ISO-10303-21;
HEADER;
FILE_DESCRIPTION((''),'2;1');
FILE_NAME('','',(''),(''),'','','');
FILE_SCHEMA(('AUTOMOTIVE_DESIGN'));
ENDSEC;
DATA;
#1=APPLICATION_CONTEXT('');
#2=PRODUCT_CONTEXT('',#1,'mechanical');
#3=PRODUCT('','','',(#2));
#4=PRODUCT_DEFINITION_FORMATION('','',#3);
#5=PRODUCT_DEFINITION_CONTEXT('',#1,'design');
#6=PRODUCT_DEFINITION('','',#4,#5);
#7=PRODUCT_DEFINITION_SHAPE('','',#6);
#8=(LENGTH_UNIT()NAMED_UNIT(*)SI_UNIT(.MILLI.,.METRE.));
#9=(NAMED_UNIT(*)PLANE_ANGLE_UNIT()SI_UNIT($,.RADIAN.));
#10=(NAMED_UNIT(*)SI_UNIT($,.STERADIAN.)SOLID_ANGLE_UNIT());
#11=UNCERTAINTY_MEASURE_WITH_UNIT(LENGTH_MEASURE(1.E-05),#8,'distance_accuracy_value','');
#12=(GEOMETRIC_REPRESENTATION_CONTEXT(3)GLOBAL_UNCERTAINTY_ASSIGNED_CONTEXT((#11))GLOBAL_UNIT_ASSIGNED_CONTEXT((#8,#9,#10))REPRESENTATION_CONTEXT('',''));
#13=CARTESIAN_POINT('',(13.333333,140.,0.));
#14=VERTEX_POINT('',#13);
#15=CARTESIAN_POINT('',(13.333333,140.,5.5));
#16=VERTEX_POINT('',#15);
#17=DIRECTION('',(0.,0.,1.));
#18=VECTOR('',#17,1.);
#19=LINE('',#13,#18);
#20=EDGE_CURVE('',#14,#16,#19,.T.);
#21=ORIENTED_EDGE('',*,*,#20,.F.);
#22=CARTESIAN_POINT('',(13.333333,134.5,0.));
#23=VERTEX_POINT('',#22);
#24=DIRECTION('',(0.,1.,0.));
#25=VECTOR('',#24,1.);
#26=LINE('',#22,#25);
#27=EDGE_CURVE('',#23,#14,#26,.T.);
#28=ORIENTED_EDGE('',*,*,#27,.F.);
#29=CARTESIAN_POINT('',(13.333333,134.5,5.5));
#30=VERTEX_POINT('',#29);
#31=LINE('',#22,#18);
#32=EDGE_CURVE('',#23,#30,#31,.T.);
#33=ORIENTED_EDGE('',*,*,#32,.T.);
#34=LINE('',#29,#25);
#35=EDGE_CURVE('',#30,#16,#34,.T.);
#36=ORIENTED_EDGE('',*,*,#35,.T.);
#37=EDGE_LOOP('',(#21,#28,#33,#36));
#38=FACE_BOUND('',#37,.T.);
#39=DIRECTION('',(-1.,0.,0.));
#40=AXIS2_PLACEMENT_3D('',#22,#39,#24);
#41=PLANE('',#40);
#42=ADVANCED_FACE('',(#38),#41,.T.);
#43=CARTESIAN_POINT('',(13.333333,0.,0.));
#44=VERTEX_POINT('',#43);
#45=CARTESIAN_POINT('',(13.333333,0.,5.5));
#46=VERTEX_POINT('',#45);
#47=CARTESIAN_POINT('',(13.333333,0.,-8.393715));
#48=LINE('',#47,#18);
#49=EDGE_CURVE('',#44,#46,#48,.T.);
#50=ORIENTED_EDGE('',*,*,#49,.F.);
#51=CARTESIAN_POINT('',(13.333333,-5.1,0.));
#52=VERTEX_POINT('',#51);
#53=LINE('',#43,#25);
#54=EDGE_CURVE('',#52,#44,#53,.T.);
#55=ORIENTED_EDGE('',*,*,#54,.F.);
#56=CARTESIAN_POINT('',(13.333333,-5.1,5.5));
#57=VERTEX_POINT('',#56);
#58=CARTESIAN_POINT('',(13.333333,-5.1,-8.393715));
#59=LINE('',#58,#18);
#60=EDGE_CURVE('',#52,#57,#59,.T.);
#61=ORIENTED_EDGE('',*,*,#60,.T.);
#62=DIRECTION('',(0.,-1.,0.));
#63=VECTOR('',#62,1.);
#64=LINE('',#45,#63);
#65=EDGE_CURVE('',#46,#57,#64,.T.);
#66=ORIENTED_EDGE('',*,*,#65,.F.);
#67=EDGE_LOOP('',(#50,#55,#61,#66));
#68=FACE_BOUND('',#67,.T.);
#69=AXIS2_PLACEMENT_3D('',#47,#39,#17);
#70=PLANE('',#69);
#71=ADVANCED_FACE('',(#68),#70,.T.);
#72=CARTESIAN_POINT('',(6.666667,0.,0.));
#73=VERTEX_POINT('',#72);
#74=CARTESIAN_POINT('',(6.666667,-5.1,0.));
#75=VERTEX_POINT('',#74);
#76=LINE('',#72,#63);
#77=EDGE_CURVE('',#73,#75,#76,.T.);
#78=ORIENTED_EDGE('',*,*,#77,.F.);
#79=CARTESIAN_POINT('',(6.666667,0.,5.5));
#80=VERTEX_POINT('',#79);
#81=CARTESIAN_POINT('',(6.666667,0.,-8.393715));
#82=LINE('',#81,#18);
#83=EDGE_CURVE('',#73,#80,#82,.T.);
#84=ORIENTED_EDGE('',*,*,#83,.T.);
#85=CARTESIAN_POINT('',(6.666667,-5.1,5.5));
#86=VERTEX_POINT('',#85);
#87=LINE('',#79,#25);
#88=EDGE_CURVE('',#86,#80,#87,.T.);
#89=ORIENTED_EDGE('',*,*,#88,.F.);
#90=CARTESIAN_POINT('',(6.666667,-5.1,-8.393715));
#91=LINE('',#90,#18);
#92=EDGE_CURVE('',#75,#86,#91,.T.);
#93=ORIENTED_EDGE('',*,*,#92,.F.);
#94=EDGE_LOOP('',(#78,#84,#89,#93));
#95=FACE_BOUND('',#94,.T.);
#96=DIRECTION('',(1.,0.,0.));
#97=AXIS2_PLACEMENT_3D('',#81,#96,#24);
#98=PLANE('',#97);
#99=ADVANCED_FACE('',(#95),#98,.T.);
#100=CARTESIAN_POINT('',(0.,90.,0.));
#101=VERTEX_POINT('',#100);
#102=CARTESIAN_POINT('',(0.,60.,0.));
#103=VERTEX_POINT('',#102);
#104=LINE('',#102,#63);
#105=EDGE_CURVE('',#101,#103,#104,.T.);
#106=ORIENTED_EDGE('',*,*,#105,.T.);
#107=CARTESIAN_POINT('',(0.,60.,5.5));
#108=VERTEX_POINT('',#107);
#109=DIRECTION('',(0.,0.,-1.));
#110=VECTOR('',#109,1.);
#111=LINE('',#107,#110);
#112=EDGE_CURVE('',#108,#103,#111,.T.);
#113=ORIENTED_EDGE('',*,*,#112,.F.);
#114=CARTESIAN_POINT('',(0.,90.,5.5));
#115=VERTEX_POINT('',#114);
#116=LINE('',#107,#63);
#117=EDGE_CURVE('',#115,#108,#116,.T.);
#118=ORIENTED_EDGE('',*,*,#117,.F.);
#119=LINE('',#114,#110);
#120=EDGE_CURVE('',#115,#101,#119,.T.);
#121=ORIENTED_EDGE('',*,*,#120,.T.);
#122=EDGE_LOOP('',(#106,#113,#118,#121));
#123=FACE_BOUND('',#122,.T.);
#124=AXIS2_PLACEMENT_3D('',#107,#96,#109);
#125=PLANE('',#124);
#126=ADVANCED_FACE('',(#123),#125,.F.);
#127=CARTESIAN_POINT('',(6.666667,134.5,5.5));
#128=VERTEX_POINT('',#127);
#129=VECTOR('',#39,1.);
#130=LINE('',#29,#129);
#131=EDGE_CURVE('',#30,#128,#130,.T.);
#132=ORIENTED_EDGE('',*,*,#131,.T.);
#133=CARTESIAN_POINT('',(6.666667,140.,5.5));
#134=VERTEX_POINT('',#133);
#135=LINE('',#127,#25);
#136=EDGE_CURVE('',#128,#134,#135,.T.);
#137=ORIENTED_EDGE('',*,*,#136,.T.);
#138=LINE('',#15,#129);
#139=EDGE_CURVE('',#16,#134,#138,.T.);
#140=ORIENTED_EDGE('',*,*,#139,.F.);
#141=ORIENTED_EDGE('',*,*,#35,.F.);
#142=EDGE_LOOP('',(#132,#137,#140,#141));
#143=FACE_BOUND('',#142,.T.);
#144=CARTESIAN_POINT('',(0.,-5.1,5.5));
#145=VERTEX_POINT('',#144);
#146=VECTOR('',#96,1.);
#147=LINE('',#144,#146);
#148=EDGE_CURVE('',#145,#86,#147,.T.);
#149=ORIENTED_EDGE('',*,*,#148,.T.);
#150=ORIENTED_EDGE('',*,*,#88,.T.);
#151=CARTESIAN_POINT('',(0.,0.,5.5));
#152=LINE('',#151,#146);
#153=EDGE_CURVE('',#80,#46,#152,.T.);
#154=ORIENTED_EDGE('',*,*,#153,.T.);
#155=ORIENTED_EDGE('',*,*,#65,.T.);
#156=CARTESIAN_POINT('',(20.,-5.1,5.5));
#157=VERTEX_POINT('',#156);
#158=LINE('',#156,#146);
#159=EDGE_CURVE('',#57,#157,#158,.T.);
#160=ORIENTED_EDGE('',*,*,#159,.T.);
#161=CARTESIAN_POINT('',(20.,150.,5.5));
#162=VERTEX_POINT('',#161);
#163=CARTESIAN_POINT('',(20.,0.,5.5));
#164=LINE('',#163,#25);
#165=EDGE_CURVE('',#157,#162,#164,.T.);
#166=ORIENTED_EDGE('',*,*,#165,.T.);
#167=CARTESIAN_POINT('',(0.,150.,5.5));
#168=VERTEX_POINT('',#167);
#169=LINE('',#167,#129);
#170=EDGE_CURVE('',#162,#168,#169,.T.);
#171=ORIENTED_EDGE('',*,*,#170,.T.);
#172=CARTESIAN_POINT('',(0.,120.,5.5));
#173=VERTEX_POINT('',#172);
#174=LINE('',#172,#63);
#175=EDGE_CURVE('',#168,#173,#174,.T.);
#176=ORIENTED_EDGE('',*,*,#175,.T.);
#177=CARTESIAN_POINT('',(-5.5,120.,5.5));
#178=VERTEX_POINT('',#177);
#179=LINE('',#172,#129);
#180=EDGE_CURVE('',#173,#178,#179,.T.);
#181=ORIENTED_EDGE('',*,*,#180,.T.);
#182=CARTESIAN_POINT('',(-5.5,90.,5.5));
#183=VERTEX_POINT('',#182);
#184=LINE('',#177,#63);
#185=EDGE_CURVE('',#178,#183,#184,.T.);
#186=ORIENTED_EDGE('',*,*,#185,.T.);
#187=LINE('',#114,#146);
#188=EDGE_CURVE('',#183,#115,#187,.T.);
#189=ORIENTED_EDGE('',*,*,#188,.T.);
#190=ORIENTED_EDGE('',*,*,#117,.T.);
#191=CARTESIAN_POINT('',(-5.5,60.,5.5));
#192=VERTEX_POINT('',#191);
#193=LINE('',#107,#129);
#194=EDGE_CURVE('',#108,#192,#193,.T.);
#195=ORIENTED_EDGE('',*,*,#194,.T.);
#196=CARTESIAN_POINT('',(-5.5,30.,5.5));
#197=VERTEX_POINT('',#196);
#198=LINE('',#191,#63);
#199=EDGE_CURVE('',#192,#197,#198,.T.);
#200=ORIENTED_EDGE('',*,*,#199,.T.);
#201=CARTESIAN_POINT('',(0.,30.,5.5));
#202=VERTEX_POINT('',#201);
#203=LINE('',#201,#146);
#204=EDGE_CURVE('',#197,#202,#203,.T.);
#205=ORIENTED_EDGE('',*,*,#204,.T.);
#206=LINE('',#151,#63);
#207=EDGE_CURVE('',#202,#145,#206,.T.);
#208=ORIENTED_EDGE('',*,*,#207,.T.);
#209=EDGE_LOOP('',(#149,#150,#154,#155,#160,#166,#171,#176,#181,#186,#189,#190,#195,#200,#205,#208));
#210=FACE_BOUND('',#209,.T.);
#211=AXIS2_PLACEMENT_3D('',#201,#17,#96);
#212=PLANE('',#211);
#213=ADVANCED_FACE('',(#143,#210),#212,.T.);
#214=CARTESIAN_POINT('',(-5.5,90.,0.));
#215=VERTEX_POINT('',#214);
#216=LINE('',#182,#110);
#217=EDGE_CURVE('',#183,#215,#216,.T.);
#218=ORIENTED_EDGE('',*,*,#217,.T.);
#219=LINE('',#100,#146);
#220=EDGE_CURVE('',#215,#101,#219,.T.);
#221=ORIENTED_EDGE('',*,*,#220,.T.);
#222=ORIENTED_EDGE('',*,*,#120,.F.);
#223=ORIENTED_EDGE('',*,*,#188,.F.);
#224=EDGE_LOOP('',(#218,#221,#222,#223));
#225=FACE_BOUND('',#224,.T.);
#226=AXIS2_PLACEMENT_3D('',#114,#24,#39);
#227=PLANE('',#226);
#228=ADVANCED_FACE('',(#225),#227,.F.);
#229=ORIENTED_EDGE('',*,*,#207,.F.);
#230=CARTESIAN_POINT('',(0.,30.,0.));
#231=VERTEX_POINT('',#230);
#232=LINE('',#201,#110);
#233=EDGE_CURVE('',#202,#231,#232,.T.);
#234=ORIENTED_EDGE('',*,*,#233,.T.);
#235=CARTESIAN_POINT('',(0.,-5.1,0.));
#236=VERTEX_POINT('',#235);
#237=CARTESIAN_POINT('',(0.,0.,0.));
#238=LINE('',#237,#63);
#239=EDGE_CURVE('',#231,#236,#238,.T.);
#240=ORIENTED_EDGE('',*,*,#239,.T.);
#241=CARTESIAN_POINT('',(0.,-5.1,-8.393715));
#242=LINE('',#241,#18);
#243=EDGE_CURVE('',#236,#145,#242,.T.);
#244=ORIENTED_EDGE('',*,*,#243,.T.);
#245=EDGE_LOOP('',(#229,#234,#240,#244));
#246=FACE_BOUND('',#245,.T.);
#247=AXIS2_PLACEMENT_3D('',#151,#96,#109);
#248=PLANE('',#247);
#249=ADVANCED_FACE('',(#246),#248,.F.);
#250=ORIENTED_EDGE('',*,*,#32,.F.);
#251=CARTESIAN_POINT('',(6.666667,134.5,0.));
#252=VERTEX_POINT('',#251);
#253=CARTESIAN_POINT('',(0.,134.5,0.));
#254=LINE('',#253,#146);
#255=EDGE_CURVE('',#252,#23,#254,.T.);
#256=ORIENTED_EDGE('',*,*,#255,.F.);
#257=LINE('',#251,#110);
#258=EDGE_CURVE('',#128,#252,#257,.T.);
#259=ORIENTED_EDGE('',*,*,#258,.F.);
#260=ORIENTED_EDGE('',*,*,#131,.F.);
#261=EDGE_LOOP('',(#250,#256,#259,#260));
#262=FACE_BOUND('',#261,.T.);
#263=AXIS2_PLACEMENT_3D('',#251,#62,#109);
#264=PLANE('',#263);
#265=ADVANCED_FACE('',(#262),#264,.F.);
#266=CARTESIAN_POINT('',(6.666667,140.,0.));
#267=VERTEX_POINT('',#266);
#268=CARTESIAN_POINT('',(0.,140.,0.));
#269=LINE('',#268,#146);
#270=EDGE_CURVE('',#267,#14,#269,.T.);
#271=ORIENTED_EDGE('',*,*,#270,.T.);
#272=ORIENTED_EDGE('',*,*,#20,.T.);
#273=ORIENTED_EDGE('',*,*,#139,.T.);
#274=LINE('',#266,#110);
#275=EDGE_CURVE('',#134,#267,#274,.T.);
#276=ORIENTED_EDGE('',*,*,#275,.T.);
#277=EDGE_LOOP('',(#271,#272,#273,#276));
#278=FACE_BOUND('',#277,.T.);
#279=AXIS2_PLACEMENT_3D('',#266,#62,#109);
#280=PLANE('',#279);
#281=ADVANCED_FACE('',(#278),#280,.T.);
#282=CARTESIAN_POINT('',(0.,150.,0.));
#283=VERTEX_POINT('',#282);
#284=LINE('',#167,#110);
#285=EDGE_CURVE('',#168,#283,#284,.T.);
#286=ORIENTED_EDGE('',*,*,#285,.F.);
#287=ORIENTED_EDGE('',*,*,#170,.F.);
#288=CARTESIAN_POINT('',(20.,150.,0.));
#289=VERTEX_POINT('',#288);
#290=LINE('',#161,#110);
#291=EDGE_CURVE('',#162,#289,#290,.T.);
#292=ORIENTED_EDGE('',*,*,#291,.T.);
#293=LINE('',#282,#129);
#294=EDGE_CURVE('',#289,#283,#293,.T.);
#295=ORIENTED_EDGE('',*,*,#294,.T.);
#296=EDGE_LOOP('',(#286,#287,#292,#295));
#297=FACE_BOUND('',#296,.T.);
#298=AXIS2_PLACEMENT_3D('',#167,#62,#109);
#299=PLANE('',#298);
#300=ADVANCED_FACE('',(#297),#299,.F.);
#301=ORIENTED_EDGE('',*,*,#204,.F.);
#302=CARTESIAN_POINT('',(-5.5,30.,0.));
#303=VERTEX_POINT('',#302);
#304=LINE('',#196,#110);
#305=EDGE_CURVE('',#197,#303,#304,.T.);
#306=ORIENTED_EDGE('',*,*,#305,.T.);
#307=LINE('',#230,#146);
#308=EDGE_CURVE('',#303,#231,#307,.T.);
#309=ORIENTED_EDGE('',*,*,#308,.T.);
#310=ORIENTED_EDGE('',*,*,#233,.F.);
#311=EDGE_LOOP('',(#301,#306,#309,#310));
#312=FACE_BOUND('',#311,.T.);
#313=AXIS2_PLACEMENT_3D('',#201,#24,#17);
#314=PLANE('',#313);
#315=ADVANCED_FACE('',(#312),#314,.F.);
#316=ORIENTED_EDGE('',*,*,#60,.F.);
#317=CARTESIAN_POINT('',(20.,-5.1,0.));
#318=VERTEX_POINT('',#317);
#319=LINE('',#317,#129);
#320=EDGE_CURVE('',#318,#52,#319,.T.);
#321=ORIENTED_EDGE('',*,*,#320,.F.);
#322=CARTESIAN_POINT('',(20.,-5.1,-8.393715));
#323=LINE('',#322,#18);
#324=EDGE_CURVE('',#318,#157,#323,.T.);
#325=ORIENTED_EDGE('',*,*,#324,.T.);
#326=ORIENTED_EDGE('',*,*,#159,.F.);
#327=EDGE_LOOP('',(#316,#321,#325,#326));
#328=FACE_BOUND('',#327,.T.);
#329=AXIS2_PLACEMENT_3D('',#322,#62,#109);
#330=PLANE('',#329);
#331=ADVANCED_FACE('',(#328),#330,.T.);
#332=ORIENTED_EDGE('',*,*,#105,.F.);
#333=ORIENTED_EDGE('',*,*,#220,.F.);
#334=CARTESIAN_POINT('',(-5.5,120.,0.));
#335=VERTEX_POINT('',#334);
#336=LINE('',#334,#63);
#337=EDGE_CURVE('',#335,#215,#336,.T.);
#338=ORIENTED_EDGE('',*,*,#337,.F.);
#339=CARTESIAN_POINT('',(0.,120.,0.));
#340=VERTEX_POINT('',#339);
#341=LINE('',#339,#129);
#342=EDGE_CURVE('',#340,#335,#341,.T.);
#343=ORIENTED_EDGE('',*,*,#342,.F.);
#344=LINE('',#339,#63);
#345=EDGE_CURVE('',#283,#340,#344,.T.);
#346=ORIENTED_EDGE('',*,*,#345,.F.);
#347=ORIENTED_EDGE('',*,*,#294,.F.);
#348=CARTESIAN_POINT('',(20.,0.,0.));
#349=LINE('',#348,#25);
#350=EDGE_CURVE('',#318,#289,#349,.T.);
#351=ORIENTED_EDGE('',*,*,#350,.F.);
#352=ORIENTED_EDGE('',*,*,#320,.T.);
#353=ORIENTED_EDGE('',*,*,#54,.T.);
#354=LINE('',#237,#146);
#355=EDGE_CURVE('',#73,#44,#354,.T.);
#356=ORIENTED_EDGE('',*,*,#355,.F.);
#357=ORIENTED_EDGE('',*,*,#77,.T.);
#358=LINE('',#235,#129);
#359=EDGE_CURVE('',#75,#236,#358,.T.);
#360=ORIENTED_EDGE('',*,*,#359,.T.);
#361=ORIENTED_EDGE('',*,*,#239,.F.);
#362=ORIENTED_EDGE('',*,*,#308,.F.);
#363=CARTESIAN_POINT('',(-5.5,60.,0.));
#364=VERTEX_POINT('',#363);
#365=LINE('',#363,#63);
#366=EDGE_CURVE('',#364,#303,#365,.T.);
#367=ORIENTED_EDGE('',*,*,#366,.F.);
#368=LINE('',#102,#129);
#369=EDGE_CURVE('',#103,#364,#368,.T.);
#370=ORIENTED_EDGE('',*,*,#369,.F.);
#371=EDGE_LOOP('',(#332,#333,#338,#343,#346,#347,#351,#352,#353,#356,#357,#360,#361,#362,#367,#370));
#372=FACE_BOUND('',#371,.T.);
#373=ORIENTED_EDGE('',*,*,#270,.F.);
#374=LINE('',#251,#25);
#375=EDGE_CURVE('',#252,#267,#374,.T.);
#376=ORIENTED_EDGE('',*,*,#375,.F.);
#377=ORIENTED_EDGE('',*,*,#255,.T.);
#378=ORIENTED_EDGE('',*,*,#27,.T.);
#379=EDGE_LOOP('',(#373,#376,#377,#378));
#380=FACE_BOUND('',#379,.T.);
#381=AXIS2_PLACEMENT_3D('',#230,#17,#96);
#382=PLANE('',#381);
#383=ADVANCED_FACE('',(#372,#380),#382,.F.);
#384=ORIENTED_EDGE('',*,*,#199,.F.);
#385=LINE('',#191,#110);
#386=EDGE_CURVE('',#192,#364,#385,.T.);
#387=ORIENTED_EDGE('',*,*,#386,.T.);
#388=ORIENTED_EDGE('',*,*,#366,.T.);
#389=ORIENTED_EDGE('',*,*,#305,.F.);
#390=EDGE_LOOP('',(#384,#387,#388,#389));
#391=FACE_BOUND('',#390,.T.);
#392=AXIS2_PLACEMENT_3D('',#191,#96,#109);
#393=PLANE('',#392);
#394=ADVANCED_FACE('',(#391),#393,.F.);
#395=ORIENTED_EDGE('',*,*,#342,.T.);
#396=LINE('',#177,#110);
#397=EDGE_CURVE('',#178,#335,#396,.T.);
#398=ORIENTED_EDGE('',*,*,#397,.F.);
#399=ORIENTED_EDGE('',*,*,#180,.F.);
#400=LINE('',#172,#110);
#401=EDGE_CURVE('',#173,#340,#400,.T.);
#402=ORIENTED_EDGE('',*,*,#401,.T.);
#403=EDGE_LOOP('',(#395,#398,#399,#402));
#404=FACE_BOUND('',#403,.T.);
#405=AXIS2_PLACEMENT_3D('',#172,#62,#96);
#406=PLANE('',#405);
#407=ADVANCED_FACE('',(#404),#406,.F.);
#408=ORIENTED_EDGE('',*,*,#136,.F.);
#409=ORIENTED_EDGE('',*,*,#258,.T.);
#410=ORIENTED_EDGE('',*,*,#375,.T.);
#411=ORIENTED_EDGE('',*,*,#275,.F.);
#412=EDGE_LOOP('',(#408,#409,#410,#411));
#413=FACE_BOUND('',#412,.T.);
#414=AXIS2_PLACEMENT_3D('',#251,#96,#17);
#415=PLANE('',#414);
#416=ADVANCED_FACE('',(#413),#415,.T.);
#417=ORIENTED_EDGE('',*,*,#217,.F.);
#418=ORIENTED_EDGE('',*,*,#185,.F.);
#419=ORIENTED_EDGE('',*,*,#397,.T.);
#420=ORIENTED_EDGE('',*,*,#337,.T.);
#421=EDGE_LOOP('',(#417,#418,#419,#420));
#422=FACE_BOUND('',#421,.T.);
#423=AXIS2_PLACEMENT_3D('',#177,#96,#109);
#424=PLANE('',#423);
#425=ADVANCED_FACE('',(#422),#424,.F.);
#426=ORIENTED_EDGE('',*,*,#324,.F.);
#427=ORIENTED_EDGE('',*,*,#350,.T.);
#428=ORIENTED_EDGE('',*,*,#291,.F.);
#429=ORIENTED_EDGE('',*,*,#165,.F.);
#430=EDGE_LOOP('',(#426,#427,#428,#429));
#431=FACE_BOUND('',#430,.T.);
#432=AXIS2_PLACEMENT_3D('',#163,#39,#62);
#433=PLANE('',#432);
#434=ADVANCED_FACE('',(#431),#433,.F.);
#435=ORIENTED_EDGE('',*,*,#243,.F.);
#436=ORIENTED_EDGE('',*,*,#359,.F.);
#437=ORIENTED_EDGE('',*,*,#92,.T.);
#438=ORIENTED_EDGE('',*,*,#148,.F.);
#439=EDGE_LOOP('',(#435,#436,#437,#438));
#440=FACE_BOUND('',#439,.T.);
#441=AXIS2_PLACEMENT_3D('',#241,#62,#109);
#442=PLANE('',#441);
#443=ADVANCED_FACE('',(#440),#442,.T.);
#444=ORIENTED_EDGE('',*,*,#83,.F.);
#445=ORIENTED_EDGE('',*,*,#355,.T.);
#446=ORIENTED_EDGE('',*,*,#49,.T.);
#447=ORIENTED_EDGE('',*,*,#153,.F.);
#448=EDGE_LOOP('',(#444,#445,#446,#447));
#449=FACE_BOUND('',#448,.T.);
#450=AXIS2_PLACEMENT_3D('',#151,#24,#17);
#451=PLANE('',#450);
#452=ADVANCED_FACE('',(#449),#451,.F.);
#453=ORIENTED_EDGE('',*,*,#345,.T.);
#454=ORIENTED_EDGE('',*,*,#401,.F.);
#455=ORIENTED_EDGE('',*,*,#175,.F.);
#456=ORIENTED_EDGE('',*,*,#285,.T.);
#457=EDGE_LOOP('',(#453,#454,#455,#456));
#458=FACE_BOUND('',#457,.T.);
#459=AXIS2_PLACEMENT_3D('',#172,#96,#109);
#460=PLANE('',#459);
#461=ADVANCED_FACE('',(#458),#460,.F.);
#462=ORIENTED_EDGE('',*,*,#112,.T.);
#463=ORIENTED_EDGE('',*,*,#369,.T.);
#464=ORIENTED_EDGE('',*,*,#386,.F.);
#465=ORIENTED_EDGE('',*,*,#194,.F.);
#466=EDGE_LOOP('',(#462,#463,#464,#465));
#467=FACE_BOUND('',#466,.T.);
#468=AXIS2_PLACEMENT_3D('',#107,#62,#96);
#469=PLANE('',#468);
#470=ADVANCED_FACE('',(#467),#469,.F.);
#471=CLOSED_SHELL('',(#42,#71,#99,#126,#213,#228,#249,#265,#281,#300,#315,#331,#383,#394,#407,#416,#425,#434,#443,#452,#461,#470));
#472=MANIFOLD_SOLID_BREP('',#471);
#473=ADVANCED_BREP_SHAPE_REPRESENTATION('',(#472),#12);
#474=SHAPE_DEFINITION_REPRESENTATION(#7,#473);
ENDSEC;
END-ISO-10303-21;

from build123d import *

# Parameters (mm, degrees)
BOSS_EXTRUDE1_DEPTH = 5.5
CAVITY1_START       = 134.5
CAVITY1_OUTLINE_W   = 6.666666666
CAVITY1_OUTLINE_H   = 5.5
CAVITY1_DEPTH       = 5.5
SKETCH2_W           = 6.666666667
SKETCH2_H           = 5.1
BOSS_EXTRUDE2_DEPTH = 5.5


# Read off the part's stored shape, not the designer's step: Cavity1
with BuildPart() as part:
    # Sketch1 → Boss-Extrude1 (new body)
    with BuildSketch(Plane.XY):
        Polygon((0, 120), (0, 150), (20, 150), (20, 0), (0, 0), (0, 30), (-5.5, 30), (-5.5, 60), (0, 60), (0, 90), (-5.5, 90), (-5.5, 120), align=None)
    extrude(amount=BOSS_EXTRUDE1_DEPTH)

    # Cavity1 outline → Cavity1 (cut)
    with BuildSketch(Plane(origin=(0, 0, 0), x_dir=(1, 0, 0), z_dir=(0, 1, 0)).offset(CAVITY1_START)):
        with Locations((10, -2.75)):
            Rectangle(CAVITY1_OUTLINE_W, CAVITY1_OUTLINE_H)
    extrude(amount=CAVITY1_DEPTH, mode=Mode.SUBTRACT)

    # Sketch2 → Boss-Extrude2 (add)
    with BuildSketch(Plane.XY.offset(5.5)):
        with Locations((3.333333334, -2.55)):
            Rectangle(SKETCH2_W, SKETCH2_H)
        with Locations((16.666666666, -2.55)):
            Rectangle(SKETCH2_W, SKETCH2_H)
    extrude(amount=-BOSS_EXTRUDE2_DEPTH)


solid = part.part
